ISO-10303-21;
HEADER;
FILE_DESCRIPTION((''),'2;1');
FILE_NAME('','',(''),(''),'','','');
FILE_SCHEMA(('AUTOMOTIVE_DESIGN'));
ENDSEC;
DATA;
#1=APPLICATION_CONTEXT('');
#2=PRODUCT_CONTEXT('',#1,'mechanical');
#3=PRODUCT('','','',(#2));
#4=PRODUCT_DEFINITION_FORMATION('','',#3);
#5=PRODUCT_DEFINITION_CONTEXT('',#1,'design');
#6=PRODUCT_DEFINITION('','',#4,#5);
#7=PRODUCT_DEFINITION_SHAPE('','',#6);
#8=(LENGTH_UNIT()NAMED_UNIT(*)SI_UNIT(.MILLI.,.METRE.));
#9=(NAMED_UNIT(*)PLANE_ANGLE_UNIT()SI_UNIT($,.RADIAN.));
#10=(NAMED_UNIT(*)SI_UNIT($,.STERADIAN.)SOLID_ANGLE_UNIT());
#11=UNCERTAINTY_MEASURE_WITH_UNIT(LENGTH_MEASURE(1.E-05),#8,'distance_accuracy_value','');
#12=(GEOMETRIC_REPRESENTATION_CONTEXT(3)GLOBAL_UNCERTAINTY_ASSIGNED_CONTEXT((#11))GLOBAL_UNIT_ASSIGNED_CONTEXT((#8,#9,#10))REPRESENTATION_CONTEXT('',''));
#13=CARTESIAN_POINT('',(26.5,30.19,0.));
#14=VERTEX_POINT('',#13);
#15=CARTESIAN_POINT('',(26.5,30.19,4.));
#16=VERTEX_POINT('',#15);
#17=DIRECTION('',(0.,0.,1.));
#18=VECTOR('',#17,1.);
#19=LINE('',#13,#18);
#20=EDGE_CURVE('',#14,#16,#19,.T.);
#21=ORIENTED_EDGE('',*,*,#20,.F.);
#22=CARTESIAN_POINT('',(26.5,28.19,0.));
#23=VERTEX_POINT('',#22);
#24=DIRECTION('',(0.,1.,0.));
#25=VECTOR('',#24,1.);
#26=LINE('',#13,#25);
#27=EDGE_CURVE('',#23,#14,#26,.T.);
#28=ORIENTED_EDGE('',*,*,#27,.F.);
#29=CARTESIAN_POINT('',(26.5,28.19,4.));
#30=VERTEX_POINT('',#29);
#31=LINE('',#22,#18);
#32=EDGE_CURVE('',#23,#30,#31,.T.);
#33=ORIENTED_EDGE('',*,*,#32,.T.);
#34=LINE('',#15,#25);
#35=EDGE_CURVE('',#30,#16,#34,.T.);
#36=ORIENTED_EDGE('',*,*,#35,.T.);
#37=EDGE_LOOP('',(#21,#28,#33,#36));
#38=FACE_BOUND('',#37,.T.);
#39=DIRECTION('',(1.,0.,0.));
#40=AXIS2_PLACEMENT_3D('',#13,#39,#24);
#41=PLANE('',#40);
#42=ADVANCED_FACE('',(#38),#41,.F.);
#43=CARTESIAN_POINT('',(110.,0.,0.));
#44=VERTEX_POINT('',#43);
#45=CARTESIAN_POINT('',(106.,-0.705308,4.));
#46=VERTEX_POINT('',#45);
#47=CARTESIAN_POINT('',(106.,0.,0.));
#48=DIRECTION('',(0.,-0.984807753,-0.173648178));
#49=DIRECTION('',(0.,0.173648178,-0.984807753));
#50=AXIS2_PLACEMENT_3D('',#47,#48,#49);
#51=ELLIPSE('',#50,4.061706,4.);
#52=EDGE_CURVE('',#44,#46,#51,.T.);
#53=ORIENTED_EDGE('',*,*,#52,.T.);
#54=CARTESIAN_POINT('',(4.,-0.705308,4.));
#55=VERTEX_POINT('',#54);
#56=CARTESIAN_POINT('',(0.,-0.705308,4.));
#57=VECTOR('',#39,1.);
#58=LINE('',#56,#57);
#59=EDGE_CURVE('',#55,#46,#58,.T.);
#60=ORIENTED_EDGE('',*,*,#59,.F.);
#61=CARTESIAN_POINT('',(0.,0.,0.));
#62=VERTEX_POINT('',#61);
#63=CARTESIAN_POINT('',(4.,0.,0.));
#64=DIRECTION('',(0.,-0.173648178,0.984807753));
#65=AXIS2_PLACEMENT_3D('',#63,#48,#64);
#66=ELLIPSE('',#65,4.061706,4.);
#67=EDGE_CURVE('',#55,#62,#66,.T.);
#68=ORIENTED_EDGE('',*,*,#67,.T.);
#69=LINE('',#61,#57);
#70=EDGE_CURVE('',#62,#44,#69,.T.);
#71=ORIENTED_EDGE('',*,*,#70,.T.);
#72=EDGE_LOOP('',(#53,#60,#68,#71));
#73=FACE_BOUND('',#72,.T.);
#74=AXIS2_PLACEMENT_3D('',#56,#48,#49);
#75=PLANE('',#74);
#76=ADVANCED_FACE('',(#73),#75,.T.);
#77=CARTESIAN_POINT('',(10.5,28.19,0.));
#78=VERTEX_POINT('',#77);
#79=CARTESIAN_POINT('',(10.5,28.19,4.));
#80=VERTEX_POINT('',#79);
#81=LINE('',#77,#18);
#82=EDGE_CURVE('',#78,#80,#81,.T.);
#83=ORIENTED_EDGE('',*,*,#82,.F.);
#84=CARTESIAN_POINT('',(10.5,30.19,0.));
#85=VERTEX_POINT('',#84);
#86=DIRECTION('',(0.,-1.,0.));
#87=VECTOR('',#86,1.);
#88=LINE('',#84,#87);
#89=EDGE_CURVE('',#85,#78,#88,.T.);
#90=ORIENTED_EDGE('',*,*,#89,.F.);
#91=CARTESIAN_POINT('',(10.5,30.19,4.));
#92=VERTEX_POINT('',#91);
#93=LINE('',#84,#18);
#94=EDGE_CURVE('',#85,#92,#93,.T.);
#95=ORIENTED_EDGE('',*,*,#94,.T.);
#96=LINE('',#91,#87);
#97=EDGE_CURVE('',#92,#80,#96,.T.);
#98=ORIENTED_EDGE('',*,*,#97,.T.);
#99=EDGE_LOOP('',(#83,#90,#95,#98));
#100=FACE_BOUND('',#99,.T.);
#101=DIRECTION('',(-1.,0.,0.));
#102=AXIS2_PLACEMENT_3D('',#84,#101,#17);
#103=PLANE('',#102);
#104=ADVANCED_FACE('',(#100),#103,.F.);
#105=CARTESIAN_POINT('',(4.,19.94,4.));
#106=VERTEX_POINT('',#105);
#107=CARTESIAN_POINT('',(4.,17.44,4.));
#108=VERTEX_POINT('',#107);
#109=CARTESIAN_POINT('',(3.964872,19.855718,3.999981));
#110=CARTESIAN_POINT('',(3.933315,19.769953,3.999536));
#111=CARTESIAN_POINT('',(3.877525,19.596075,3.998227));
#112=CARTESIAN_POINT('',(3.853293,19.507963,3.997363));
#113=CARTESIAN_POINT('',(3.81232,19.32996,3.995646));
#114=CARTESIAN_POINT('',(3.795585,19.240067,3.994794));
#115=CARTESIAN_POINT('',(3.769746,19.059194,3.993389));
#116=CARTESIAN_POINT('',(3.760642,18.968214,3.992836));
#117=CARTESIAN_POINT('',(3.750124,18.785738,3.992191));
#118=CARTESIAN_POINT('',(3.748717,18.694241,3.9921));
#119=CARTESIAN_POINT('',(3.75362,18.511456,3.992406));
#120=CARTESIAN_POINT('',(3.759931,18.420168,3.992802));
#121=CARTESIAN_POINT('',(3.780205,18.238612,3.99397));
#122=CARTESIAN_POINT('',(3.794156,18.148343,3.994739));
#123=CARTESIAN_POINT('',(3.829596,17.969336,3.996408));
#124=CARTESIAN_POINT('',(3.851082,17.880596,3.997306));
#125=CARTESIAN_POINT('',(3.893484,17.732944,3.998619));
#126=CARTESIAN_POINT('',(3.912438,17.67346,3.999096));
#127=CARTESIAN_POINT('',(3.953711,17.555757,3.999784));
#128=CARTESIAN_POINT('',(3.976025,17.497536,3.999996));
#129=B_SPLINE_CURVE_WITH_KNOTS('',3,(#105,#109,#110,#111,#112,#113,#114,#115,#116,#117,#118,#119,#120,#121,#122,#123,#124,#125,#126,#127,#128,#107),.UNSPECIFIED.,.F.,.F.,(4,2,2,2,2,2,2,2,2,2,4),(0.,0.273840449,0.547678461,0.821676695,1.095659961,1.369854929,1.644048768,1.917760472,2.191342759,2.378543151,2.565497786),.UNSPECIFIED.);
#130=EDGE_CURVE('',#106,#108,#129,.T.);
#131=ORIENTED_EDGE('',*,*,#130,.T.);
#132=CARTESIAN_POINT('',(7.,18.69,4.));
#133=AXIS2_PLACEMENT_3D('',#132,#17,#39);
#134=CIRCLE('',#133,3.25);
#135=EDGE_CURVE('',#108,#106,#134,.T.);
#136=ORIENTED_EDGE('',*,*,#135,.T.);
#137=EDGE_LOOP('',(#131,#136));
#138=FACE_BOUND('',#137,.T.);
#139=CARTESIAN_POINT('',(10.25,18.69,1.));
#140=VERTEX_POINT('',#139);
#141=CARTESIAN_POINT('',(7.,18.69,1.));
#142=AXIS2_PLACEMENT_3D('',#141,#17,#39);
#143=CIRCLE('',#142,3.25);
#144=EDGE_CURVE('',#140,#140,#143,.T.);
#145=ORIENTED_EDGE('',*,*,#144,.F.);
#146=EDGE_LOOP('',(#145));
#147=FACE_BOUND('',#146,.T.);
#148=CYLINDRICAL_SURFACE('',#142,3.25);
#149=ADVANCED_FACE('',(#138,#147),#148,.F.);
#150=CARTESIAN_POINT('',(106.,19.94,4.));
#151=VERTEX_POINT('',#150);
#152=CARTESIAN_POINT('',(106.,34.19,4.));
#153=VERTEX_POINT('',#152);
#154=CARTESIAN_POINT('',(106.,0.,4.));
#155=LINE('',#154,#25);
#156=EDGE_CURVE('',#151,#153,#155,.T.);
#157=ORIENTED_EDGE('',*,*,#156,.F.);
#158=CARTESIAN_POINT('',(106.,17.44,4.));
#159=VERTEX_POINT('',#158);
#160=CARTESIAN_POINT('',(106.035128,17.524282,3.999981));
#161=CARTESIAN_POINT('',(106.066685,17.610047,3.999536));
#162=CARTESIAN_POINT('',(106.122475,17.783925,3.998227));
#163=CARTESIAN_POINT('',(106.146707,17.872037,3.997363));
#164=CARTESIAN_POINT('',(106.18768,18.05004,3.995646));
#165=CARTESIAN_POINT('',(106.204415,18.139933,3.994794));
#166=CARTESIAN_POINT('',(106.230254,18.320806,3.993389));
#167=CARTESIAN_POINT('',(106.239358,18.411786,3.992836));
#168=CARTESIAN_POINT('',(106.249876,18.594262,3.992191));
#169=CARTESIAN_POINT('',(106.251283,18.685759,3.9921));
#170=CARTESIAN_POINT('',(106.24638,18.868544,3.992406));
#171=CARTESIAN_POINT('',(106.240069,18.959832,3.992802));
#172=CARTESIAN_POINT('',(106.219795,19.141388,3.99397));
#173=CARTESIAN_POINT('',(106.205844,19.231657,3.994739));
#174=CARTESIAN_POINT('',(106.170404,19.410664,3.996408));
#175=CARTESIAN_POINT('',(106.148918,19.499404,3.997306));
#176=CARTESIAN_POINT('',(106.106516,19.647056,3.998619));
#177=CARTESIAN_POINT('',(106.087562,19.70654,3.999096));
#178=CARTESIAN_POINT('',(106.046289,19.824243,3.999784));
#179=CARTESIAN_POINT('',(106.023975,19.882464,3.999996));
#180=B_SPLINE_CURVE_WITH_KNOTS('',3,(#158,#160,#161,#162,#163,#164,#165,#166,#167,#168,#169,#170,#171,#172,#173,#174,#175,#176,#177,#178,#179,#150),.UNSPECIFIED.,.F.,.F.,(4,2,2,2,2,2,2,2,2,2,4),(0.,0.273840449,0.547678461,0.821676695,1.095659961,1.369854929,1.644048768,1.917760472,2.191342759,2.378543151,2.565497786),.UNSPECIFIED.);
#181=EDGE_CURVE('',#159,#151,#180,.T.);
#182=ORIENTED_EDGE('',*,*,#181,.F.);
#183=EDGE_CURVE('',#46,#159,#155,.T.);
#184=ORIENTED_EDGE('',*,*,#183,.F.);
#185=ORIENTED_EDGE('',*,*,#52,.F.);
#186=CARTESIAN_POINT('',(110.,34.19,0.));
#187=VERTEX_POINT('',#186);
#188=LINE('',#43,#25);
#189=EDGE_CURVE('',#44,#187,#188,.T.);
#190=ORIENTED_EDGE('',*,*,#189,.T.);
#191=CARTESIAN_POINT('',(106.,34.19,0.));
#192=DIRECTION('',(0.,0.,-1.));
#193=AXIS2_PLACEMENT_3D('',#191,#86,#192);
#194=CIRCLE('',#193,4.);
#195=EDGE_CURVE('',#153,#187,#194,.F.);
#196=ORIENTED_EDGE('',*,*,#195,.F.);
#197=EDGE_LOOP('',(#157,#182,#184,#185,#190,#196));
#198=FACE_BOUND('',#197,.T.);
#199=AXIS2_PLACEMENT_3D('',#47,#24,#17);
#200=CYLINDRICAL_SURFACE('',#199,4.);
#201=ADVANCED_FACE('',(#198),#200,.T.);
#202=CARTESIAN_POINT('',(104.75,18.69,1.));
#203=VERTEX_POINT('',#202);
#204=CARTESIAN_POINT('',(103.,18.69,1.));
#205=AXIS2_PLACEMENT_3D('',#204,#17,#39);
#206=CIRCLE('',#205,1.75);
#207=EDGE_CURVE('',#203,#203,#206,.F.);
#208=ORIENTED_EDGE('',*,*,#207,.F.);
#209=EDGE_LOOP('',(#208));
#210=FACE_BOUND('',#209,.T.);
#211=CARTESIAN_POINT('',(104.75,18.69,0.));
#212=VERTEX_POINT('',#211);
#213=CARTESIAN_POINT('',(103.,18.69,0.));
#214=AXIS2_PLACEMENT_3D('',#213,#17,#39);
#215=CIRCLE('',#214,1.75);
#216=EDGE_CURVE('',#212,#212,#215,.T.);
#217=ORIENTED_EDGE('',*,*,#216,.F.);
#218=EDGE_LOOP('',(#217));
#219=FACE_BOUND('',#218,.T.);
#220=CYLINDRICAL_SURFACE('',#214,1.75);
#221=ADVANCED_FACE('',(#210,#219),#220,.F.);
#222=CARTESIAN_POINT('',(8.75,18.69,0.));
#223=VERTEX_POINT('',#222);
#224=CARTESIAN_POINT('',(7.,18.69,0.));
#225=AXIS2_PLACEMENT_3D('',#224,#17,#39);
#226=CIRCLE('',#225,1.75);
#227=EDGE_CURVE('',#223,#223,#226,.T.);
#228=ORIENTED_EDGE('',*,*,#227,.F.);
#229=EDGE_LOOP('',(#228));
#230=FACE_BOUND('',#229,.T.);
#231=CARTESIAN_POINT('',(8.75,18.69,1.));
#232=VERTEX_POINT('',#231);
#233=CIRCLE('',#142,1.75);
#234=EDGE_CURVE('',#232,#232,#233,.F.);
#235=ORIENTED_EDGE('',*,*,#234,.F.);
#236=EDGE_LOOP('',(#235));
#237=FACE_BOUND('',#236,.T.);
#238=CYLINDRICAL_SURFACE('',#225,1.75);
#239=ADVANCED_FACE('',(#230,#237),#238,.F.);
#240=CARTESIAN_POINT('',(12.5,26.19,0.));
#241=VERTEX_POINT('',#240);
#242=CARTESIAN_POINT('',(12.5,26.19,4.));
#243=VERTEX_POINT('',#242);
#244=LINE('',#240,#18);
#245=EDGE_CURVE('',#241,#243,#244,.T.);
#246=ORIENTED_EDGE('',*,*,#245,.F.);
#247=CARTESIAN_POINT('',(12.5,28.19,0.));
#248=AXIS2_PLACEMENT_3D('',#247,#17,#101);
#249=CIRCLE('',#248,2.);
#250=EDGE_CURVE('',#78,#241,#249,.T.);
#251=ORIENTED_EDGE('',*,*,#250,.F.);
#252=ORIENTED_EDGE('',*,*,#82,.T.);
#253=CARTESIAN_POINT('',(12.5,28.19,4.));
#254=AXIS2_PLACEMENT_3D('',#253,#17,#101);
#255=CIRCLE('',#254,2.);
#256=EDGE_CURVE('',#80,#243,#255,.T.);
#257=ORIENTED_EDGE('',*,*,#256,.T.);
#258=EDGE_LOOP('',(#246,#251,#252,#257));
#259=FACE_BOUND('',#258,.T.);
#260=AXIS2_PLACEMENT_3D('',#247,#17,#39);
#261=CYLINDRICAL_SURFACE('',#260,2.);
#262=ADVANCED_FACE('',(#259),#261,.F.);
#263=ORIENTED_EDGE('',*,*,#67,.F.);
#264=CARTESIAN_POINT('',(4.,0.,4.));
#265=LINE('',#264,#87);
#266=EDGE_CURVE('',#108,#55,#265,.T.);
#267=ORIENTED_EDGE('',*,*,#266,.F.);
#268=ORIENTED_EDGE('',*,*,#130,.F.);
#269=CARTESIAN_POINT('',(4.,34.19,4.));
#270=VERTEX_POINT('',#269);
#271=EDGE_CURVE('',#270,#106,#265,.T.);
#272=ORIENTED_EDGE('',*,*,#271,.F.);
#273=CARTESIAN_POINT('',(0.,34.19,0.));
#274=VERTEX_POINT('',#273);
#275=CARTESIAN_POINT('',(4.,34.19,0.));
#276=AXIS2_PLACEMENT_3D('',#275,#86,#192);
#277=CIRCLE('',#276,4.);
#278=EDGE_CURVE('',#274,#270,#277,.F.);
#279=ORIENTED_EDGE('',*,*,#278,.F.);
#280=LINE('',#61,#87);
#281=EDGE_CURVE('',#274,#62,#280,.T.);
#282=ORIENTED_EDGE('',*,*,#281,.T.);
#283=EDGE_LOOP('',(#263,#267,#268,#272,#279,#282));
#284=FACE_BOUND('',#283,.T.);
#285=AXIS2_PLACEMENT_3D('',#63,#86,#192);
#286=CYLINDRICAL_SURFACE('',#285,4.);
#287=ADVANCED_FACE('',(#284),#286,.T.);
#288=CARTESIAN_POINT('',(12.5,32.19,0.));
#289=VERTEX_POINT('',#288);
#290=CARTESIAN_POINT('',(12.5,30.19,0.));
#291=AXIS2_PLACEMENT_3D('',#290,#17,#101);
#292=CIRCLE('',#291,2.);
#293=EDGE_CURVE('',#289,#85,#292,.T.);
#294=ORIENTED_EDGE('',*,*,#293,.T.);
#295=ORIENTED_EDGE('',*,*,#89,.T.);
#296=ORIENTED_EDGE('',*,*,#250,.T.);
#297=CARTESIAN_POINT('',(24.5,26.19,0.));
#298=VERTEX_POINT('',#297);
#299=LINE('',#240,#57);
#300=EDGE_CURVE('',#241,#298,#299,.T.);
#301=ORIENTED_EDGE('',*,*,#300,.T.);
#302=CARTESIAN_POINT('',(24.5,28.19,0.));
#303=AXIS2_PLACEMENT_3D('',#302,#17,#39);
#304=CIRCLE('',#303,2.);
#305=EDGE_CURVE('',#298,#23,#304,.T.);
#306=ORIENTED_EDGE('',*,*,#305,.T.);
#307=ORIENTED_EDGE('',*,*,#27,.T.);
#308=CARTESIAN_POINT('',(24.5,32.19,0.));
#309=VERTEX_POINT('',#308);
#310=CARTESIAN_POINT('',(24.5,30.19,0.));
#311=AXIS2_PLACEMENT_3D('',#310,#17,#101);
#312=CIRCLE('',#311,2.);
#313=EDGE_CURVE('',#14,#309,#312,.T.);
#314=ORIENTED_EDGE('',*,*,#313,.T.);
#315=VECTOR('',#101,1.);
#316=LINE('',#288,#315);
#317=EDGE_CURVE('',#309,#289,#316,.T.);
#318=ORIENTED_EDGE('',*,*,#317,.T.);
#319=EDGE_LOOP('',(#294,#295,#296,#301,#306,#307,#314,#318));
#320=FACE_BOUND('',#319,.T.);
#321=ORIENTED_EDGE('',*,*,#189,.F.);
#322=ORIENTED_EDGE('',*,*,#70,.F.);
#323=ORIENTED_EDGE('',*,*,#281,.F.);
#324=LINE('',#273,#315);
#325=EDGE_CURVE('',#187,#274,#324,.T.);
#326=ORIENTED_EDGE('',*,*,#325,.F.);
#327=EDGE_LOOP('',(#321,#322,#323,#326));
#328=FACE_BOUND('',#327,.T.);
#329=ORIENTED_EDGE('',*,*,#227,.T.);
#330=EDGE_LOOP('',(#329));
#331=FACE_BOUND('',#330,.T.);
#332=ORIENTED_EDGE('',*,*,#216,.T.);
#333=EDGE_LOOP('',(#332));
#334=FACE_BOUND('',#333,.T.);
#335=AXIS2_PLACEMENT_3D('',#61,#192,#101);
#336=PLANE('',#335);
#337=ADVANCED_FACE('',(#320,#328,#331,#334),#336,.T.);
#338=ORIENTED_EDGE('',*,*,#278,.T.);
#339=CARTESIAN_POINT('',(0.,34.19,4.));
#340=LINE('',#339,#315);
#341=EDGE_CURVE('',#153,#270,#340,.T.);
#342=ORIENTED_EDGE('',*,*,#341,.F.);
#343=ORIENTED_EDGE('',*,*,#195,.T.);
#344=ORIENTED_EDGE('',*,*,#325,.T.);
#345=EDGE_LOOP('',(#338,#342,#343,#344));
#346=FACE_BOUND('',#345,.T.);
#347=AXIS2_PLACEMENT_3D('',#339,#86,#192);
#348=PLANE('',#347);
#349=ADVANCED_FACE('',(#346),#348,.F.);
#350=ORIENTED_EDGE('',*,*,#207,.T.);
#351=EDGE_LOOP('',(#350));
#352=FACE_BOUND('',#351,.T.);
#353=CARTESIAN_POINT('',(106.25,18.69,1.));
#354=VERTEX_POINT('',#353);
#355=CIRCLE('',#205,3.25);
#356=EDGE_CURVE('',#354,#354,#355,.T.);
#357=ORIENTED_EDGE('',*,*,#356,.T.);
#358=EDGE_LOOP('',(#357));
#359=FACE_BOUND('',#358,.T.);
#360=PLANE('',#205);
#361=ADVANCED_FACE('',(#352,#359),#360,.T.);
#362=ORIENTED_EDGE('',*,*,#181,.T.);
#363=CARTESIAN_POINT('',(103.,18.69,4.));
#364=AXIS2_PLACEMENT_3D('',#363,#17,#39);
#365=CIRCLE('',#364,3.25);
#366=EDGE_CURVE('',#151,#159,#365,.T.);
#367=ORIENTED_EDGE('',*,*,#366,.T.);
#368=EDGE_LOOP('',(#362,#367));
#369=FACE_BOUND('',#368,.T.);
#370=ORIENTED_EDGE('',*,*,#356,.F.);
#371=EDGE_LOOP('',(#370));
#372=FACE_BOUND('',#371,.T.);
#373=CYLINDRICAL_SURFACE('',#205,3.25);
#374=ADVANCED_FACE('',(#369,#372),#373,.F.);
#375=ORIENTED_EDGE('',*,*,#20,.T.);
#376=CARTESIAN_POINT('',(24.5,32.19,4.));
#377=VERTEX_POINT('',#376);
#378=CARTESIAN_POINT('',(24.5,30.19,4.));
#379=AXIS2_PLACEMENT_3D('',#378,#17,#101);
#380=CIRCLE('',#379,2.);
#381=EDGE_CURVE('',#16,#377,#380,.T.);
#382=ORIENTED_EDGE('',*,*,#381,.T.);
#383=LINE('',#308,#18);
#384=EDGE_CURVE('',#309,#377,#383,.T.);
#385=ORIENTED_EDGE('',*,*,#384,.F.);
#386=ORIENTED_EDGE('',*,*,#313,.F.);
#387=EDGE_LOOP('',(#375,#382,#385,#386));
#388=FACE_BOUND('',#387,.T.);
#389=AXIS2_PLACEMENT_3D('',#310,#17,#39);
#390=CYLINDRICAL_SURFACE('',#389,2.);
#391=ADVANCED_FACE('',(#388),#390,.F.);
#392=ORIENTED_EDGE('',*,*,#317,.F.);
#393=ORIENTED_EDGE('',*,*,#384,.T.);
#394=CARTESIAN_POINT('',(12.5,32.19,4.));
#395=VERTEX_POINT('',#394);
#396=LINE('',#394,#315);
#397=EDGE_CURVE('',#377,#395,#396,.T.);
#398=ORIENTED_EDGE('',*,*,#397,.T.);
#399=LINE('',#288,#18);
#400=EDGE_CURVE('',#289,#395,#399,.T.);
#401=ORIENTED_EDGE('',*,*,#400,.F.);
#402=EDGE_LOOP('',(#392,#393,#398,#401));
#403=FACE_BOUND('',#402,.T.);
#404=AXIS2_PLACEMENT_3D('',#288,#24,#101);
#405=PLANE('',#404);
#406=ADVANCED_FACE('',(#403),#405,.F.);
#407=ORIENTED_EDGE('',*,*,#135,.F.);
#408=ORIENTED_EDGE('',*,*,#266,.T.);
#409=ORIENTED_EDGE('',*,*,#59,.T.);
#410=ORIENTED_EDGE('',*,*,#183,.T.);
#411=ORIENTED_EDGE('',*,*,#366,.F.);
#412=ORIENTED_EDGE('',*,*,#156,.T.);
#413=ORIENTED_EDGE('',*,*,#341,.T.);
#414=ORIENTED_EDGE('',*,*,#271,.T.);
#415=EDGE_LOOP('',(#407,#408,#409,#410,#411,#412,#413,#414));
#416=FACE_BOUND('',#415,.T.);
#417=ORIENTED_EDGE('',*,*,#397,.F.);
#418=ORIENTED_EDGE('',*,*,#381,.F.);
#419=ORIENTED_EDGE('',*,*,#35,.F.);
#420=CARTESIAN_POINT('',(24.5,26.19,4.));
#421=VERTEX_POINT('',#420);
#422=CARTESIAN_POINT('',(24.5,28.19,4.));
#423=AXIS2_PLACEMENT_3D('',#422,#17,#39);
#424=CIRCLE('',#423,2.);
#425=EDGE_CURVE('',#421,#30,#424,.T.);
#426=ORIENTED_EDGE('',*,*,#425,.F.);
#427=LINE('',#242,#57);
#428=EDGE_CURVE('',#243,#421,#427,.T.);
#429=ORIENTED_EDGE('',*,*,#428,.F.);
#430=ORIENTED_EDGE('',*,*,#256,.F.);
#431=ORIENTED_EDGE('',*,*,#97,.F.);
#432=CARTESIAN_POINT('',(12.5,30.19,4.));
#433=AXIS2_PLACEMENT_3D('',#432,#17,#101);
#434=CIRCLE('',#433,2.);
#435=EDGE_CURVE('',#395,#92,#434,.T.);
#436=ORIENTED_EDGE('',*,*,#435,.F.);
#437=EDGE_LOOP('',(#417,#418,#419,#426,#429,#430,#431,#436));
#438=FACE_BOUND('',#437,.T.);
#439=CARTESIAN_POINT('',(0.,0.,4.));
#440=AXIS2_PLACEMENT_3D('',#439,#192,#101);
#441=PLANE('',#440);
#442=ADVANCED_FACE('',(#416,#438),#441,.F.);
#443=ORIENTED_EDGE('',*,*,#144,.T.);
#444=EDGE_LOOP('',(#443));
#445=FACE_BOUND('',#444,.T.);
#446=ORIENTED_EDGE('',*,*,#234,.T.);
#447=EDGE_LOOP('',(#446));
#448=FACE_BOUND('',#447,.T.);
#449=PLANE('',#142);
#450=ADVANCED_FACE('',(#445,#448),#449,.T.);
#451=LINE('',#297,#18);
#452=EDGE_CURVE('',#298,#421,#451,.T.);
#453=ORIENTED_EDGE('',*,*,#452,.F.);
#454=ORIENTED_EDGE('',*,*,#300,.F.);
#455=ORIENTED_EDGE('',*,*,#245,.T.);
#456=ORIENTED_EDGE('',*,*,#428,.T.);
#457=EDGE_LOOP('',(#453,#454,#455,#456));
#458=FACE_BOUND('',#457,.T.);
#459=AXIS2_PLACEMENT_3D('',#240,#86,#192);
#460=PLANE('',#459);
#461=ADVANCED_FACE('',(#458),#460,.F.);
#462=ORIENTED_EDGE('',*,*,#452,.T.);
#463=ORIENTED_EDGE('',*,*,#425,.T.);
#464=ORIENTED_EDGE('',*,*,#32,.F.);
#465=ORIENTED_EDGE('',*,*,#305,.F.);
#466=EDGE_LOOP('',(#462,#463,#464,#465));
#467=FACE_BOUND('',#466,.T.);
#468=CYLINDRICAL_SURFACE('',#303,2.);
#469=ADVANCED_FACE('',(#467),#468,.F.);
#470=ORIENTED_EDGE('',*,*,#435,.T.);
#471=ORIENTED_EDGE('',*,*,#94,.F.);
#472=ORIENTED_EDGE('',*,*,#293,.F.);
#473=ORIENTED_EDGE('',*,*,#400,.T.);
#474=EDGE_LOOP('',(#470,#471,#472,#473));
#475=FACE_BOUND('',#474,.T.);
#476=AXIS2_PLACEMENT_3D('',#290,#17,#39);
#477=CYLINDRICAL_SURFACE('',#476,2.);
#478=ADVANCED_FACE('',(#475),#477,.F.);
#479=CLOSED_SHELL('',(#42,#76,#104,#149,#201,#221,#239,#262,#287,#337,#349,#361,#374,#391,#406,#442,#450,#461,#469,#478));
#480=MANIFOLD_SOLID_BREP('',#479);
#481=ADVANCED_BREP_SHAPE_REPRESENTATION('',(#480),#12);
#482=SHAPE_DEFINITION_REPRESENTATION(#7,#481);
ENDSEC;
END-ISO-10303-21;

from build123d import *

# Parameters (mm, degrees)
ESQUISSE1_W             = 110
ESQUISSE1_H             = 34.19
BOSS_EXTRU_1_DEPTH      = 4
BOSS_EXTRU_2_DEPTH      = 110
ESQUISSE3_R             = 1.75
ENL_V_MAT_EXTRU_1_DEPTH = 4
ESQUISSE4_R             = 3.25
ENL_V_MAT_EXTRU_2_DEPTH = 3
ENL_V_MAT_EXTRU_3_DEPTH = 4
CONG_1_R                = 4


with BuildPart() as part:
    # Esquisse1 → Boss.-Extru.1 (new body)
    with BuildSketch(Plane.XY):
        with Locations((55, 17.095)):
            Rectangle(ESQUISSE1_W, ESQUISSE1_H)
    extrude(amount=BOSS_EXTRU_1_DEPTH)

    # Esquisse2 → Boss.-Extru.2 (add)
    with BuildSketch(Plane(origin=(110, 0, 0), x_dir=(0, 0, -1), z_dir=(1, 0, 0))):
        Polygon((0, 0), (-4, 0), (-4, -0.705307923), align=None)
    extrude(amount=-BOSS_EXTRU_2_DEPTH)

    # Esquisse3 → Enlèv. mat.-Extru.1 (cut)
    with BuildSketch(Plane.XY.offset(4)):
        with Locations((7, 18.69)):
            Circle(ESQUISSE3_R)
        with Locations((103, 18.69)):
            Circle(ESQUISSE3_R)
    extrude(amount=-ENL_V_MAT_EXTRU_1_DEPTH, mode=Mode.SUBTRACT)

    # Esquisse4 → Enlèv. mat.-Extru.2 (cut)
    with BuildSketch(Plane.XY.offset(4)):
        with Locations((7, 18.69)):
            Circle(ESQUISSE4_R)
        with Locations((103, 18.69)):
            Circle(ESQUISSE4_R)
    extrude(amount=-ENL_V_MAT_EXTRU_2_DEPTH, mode=Mode.SUBTRACT)

    # Esquisse5 → Enlèv. mat.-Extru.3 (cut)
    with BuildSketch(Plane.XY.offset(4)):
        with BuildLine():
            Line((12.5, 32.19), (24.5, 32.19))
            ThreePointArc((24.5, 32.19), (25.914213562, 31.604213562), (26.5, 30.19))
            Line((26.5, 30.19), (26.5, 28.19))
            ThreePointArc((26.5, 28.19), (25.914213562, 26.775786438), (24.5, 26.19))
            Line((24.5, 26.19), (12.5, 26.19))
            ThreePointArc((12.5, 26.19), (11.085786438, 26.775786438), (10.5, 28.19))
            Line((10.5, 28.19), (10.5, 30.19))
            ThreePointArc((10.5, 30.19), (11.085786438, 31.604213562), (12.5, 32.19))
        make_face()
    extrude(amount=-ENL_V_MAT_EXTRU_3_DEPTH, mode=Mode.SUBTRACT)

    # Congé1
    # the kernel refuses this fillet: 4 mm, written as the material it takes off along each edge
    with BuildSketch(Plane(origin=(0, 44.19, 4), x_dir=(1, 0, 0), z_dir=(0, -1, 0)), Plane(origin=(110, 44.19, 4), x_dir=(0, 0, -1), z_dir=(0, -1, 0))) as cong_1_piece_1:
        with BuildLine():
            CenterArc((CONG_1_R, -CONG_1_R), CONG_1_R, 90, 90)
            Line((0, -CONG_1_R), (0, 0))
            Line((0, 0), (CONG_1_R, 0))
        make_face()
    extrude(amount=54.895307923, mode=Mode.SUBTRACT)


solid = part.part
